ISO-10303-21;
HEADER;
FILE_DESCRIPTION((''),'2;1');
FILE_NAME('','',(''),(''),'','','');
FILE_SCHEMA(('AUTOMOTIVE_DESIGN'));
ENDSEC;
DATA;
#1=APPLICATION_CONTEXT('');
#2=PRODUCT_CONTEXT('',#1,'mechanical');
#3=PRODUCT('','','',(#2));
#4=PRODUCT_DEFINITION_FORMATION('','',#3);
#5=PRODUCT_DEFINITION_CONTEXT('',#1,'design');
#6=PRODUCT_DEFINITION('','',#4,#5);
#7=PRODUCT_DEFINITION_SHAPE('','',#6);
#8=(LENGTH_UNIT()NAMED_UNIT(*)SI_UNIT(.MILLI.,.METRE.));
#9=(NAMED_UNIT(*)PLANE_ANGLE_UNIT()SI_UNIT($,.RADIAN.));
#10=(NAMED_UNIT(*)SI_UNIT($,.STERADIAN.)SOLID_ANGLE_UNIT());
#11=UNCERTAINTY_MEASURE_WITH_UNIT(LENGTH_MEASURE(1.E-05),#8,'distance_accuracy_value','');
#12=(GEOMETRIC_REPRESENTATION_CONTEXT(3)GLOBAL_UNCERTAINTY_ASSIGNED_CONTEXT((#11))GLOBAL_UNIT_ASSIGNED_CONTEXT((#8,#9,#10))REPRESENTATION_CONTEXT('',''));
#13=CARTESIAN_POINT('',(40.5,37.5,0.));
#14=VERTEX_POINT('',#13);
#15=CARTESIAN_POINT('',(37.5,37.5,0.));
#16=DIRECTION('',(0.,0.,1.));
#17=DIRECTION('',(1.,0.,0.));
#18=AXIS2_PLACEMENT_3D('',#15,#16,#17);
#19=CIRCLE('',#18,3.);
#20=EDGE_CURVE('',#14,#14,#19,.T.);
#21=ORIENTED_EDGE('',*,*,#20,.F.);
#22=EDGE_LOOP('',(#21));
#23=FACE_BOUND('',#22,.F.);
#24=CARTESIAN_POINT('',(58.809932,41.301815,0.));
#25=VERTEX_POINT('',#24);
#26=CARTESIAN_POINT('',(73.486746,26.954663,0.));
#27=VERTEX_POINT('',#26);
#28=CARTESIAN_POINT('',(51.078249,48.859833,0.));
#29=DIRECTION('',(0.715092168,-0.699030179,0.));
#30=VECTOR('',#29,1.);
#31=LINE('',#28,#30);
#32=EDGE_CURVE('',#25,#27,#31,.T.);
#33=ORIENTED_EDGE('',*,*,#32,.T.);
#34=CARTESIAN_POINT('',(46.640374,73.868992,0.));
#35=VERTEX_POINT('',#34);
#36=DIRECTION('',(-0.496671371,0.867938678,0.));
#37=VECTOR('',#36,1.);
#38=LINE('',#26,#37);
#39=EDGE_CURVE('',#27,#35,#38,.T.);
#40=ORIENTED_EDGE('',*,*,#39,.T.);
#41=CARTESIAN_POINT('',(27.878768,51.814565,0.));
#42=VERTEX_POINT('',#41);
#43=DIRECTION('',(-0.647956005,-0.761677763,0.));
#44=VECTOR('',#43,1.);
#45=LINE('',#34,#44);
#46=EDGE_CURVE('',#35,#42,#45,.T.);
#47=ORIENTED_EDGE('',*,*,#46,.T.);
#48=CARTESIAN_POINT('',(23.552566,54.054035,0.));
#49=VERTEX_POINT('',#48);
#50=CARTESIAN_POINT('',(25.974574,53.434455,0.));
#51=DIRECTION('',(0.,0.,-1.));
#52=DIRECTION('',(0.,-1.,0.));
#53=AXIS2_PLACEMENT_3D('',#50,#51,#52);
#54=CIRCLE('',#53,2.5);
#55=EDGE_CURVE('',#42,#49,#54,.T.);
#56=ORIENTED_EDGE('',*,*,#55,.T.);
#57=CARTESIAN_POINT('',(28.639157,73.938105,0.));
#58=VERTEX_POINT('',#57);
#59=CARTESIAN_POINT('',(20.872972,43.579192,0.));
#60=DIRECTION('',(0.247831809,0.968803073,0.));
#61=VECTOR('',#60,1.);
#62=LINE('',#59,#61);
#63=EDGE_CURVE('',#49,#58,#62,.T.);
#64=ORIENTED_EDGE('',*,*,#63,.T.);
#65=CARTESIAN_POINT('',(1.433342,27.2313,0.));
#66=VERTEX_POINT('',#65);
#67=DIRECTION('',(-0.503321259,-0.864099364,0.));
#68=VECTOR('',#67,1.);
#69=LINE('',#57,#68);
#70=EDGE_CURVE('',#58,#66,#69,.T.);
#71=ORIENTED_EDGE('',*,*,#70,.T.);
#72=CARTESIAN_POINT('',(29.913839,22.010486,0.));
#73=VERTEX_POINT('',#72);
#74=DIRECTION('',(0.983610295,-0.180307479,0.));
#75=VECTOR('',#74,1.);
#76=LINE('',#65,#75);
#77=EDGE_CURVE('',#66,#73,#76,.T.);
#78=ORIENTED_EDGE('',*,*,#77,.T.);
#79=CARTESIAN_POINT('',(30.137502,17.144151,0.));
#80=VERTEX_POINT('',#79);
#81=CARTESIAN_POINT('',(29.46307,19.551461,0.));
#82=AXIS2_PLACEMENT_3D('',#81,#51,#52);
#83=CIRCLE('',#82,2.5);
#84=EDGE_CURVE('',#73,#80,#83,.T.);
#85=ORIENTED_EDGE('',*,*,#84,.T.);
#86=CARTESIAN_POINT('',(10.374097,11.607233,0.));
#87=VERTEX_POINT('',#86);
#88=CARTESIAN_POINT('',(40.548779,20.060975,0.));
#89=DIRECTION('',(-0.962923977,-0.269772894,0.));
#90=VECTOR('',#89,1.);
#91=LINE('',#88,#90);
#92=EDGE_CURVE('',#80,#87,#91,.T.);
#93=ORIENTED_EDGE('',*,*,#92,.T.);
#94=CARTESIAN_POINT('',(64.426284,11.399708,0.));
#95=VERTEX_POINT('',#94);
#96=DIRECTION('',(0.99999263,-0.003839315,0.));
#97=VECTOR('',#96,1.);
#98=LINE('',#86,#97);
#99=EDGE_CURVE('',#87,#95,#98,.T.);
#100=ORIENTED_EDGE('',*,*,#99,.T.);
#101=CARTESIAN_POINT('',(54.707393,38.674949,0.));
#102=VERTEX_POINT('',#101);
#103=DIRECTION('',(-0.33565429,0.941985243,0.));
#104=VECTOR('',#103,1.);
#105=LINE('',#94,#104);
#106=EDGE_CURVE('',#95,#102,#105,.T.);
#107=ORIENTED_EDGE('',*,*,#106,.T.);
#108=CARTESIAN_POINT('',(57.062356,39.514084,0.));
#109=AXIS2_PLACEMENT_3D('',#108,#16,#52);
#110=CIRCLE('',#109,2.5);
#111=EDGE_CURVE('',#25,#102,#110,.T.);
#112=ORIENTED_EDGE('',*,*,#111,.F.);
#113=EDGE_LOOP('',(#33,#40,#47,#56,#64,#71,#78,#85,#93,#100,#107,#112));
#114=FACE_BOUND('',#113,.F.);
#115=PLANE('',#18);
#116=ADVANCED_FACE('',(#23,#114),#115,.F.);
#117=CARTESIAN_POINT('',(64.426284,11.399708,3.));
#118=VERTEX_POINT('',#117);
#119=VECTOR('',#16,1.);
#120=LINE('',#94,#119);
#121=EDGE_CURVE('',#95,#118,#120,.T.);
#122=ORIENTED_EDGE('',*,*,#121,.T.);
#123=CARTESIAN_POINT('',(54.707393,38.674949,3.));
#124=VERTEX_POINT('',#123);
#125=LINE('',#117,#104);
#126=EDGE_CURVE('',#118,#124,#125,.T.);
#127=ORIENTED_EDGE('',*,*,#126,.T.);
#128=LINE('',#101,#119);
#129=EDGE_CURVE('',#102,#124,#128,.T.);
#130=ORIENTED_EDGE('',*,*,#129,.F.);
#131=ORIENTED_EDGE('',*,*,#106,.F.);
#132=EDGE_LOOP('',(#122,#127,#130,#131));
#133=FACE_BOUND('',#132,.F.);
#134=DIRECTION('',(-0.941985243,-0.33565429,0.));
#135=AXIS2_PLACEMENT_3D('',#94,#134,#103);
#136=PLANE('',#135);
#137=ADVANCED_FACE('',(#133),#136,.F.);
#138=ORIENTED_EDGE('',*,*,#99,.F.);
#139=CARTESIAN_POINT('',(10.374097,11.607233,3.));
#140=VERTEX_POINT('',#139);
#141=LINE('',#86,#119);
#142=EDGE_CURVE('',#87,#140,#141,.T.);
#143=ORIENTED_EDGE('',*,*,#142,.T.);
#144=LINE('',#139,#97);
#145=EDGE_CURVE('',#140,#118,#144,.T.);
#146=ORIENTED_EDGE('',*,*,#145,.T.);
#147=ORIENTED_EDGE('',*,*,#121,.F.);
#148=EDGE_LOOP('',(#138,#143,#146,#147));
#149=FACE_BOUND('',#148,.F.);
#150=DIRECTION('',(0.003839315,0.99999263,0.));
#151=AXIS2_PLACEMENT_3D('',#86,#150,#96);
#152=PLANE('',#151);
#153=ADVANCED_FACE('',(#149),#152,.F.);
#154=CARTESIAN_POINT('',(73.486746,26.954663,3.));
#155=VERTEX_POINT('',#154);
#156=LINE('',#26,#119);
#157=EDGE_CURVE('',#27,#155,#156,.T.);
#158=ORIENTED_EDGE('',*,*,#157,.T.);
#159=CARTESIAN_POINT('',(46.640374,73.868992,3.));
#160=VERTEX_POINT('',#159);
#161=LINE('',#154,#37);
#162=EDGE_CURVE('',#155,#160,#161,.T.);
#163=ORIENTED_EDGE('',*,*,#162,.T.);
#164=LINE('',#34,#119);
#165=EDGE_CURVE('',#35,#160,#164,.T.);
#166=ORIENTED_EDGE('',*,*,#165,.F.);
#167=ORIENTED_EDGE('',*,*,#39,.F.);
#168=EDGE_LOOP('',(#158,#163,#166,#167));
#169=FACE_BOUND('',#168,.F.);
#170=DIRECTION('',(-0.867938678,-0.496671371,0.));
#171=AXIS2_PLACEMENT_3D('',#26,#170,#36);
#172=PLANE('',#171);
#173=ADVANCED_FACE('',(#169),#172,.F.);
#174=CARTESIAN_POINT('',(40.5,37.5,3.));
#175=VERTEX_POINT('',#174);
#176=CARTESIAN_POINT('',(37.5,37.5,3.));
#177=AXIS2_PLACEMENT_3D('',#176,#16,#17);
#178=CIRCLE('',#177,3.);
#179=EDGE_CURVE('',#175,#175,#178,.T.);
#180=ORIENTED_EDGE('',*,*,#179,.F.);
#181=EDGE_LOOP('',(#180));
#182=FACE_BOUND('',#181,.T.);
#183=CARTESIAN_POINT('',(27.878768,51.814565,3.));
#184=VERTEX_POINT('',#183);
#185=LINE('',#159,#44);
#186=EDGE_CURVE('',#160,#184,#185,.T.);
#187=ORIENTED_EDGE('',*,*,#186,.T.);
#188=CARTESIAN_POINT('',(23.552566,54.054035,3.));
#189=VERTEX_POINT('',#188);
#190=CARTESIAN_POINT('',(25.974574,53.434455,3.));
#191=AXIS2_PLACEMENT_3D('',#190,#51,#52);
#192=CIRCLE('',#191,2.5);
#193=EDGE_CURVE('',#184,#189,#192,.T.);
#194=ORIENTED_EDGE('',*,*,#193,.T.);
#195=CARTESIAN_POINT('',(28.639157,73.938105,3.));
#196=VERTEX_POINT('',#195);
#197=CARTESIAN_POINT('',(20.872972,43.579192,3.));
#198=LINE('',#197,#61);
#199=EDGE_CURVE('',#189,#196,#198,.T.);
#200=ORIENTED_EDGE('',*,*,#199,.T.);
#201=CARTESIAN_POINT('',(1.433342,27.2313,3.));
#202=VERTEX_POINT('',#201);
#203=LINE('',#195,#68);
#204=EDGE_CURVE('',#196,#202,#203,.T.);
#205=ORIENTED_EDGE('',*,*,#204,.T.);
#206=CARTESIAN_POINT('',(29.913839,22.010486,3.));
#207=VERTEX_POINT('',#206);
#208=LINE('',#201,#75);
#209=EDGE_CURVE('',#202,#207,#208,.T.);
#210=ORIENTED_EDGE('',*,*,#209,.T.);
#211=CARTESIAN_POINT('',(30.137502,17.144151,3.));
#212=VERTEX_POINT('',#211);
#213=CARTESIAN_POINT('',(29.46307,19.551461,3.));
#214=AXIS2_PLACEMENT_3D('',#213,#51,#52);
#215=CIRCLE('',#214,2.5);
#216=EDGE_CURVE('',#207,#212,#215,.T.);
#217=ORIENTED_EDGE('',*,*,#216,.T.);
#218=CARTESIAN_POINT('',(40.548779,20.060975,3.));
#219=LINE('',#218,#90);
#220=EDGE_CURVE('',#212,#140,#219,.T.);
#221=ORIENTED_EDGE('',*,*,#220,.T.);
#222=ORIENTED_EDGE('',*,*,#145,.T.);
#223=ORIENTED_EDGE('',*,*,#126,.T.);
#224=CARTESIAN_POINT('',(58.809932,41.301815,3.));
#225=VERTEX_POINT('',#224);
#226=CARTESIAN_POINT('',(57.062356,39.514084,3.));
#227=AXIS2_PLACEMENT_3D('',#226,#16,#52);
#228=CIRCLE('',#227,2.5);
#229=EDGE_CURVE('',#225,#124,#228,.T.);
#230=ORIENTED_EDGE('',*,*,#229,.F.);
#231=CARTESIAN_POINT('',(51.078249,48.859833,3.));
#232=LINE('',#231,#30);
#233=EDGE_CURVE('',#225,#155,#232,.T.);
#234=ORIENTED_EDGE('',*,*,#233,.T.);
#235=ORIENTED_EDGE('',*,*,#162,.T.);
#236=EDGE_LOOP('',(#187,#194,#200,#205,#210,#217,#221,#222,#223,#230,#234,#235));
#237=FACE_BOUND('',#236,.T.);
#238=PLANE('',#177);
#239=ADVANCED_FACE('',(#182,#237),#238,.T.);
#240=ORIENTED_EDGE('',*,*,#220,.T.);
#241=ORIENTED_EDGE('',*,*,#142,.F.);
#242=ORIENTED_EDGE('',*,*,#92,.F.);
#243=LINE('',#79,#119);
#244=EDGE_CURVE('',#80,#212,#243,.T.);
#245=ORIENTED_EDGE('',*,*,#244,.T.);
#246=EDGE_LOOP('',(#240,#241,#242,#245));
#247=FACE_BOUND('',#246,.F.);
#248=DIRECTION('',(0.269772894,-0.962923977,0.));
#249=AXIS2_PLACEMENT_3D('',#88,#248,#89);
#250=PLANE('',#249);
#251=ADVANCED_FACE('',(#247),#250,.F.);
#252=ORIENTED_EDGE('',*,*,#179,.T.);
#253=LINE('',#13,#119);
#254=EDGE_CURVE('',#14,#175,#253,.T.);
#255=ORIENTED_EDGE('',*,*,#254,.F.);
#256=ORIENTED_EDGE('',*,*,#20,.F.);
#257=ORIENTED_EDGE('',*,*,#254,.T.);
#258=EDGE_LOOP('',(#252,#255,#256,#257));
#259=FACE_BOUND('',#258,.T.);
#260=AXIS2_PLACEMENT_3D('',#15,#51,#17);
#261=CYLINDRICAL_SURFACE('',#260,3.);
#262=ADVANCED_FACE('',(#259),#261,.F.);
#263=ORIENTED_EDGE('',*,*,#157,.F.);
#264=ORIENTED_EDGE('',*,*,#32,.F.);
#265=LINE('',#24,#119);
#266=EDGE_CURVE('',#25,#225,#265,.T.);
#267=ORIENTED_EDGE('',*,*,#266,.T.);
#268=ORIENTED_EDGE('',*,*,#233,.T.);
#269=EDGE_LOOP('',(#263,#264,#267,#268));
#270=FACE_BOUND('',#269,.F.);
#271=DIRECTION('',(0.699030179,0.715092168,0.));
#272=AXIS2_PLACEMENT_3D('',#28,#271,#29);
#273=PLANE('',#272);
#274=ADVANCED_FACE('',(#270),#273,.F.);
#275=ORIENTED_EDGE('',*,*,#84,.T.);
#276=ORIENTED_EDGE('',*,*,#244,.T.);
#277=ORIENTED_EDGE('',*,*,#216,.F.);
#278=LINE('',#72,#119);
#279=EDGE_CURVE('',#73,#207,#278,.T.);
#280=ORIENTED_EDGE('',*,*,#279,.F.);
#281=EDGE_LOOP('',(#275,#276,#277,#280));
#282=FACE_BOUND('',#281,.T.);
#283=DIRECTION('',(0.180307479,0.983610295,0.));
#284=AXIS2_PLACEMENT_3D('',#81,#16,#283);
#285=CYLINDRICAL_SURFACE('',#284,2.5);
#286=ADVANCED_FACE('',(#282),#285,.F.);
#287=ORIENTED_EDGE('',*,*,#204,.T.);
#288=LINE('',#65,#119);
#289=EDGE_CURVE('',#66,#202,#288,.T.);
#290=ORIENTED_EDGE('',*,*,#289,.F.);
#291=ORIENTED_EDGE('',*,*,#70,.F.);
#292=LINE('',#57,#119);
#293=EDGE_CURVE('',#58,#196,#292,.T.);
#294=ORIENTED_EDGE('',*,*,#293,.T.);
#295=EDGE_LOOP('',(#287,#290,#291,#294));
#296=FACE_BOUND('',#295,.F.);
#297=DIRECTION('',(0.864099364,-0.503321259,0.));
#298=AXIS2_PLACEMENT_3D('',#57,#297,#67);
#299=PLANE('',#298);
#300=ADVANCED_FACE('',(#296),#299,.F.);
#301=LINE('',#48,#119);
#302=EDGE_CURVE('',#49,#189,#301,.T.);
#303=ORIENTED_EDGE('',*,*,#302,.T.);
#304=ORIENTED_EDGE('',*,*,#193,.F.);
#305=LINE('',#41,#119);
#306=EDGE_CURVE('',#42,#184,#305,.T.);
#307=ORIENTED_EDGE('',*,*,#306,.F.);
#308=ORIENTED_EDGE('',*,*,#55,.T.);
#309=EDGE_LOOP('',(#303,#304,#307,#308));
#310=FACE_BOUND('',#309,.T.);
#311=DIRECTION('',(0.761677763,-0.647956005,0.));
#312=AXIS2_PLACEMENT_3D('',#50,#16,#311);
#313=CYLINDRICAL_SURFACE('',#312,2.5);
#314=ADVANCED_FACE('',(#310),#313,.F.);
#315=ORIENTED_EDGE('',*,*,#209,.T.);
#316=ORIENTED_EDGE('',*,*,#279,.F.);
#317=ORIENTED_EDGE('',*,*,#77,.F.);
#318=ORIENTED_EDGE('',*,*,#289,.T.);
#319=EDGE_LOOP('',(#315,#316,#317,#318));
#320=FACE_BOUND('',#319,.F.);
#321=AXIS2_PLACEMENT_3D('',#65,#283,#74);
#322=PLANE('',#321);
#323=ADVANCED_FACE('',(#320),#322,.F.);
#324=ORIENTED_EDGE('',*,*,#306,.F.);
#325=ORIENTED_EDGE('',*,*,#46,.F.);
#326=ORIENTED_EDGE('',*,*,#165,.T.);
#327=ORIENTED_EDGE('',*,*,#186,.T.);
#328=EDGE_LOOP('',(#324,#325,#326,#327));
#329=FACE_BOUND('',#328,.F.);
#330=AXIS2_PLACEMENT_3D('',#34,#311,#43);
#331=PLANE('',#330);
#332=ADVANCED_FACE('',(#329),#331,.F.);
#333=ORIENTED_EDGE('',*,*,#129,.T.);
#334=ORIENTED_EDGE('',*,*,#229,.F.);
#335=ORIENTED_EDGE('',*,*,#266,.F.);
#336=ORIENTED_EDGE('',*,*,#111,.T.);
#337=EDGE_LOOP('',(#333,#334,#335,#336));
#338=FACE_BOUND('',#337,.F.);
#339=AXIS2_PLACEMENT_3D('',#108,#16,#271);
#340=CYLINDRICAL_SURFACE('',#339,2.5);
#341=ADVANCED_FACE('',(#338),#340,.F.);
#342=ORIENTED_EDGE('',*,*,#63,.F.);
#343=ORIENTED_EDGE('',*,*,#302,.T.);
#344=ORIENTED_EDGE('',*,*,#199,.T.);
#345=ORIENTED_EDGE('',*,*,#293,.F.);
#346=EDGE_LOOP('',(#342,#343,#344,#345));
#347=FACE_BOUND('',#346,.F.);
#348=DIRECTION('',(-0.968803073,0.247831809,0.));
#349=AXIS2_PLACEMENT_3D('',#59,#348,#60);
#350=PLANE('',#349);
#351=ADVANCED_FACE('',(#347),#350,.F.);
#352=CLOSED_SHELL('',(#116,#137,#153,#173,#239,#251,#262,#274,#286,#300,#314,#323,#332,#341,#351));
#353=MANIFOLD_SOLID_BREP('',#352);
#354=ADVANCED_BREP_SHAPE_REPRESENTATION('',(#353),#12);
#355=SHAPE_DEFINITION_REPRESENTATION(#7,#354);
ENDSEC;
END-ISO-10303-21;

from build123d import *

# Parameters (mm, degrees)
F0_R     = 3
F1_DEPTH = 3
F2_DEPTH = 3
F3_R     = 2.5
F4_R     = 2.5
F5_R     = 2.5


# Not quite as in the source:
# - a feature names something its author has since deleted; it is built from what else it names


with BuildPart() as f1:
    # F0 (on Top) → F1 (new body)
    with BuildSketch(Plane.XY):
        Polygon((73.486745642, 26.9546627321), (46.6403742633, 73.8689917145), (20.8729718881, 43.5791923222), (28.6391571445, 73.9381045595), (1.4333421336, 27.2313004548), (40.5487790704, 20.0609751046), (10.3740972135, 11.6072327084), (64.4262836031, 11.3997078307), (51.0782490415, 48.8598325732), align=None)
        with Locations((37.5, 37.5)):
            Circle(F0_R, mode=Mode.SUBTRACT)
    extrude(amount=F1_DEPTH)

    # F0 (on Top) → F2 (join)
    with BuildSketch(Plane.XY):
        Polygon((73.486745642, 26.9546627321), (46.6403742633, 73.8689917145), (20.8729718881, 43.5791923222), (28.6391571445, 73.9381045595), (1.4333421336, 27.2313004548), (40.5487790704, 20.0609751046), (10.3740972135, 11.6072327084), (64.4262836031, 11.3997078307), (51.0782490415, 48.8598325732), align=None)
        with Locations((37.5, 37.5)):
            Circle(F0_R, mode=Mode.SUBTRACT)
    extrude(amount=F2_DEPTH)

    # F3
    f3_edges = [f1.edges().sort_by_distance(p)[0] for p in [
        (51.078249, 48.859833, 1.5),
    ]]
    fillet(f3_edges, radius=F3_R)

    # F4
    f4_edges = [f1.edges().sort_by_distance(p)[0] for p in [
        (20.872972, 43.579192, 1.5),
    ]]
    fillet(f4_edges, radius=F4_R)

    # F5
    f5_edges = [f1.edges().sort_by_distance(p)[0] for p in [
        (40.548779, 20.060975, 1.5),
    ]]
    fillet(f5_edges, radius=F5_R)


solid = f1.part
